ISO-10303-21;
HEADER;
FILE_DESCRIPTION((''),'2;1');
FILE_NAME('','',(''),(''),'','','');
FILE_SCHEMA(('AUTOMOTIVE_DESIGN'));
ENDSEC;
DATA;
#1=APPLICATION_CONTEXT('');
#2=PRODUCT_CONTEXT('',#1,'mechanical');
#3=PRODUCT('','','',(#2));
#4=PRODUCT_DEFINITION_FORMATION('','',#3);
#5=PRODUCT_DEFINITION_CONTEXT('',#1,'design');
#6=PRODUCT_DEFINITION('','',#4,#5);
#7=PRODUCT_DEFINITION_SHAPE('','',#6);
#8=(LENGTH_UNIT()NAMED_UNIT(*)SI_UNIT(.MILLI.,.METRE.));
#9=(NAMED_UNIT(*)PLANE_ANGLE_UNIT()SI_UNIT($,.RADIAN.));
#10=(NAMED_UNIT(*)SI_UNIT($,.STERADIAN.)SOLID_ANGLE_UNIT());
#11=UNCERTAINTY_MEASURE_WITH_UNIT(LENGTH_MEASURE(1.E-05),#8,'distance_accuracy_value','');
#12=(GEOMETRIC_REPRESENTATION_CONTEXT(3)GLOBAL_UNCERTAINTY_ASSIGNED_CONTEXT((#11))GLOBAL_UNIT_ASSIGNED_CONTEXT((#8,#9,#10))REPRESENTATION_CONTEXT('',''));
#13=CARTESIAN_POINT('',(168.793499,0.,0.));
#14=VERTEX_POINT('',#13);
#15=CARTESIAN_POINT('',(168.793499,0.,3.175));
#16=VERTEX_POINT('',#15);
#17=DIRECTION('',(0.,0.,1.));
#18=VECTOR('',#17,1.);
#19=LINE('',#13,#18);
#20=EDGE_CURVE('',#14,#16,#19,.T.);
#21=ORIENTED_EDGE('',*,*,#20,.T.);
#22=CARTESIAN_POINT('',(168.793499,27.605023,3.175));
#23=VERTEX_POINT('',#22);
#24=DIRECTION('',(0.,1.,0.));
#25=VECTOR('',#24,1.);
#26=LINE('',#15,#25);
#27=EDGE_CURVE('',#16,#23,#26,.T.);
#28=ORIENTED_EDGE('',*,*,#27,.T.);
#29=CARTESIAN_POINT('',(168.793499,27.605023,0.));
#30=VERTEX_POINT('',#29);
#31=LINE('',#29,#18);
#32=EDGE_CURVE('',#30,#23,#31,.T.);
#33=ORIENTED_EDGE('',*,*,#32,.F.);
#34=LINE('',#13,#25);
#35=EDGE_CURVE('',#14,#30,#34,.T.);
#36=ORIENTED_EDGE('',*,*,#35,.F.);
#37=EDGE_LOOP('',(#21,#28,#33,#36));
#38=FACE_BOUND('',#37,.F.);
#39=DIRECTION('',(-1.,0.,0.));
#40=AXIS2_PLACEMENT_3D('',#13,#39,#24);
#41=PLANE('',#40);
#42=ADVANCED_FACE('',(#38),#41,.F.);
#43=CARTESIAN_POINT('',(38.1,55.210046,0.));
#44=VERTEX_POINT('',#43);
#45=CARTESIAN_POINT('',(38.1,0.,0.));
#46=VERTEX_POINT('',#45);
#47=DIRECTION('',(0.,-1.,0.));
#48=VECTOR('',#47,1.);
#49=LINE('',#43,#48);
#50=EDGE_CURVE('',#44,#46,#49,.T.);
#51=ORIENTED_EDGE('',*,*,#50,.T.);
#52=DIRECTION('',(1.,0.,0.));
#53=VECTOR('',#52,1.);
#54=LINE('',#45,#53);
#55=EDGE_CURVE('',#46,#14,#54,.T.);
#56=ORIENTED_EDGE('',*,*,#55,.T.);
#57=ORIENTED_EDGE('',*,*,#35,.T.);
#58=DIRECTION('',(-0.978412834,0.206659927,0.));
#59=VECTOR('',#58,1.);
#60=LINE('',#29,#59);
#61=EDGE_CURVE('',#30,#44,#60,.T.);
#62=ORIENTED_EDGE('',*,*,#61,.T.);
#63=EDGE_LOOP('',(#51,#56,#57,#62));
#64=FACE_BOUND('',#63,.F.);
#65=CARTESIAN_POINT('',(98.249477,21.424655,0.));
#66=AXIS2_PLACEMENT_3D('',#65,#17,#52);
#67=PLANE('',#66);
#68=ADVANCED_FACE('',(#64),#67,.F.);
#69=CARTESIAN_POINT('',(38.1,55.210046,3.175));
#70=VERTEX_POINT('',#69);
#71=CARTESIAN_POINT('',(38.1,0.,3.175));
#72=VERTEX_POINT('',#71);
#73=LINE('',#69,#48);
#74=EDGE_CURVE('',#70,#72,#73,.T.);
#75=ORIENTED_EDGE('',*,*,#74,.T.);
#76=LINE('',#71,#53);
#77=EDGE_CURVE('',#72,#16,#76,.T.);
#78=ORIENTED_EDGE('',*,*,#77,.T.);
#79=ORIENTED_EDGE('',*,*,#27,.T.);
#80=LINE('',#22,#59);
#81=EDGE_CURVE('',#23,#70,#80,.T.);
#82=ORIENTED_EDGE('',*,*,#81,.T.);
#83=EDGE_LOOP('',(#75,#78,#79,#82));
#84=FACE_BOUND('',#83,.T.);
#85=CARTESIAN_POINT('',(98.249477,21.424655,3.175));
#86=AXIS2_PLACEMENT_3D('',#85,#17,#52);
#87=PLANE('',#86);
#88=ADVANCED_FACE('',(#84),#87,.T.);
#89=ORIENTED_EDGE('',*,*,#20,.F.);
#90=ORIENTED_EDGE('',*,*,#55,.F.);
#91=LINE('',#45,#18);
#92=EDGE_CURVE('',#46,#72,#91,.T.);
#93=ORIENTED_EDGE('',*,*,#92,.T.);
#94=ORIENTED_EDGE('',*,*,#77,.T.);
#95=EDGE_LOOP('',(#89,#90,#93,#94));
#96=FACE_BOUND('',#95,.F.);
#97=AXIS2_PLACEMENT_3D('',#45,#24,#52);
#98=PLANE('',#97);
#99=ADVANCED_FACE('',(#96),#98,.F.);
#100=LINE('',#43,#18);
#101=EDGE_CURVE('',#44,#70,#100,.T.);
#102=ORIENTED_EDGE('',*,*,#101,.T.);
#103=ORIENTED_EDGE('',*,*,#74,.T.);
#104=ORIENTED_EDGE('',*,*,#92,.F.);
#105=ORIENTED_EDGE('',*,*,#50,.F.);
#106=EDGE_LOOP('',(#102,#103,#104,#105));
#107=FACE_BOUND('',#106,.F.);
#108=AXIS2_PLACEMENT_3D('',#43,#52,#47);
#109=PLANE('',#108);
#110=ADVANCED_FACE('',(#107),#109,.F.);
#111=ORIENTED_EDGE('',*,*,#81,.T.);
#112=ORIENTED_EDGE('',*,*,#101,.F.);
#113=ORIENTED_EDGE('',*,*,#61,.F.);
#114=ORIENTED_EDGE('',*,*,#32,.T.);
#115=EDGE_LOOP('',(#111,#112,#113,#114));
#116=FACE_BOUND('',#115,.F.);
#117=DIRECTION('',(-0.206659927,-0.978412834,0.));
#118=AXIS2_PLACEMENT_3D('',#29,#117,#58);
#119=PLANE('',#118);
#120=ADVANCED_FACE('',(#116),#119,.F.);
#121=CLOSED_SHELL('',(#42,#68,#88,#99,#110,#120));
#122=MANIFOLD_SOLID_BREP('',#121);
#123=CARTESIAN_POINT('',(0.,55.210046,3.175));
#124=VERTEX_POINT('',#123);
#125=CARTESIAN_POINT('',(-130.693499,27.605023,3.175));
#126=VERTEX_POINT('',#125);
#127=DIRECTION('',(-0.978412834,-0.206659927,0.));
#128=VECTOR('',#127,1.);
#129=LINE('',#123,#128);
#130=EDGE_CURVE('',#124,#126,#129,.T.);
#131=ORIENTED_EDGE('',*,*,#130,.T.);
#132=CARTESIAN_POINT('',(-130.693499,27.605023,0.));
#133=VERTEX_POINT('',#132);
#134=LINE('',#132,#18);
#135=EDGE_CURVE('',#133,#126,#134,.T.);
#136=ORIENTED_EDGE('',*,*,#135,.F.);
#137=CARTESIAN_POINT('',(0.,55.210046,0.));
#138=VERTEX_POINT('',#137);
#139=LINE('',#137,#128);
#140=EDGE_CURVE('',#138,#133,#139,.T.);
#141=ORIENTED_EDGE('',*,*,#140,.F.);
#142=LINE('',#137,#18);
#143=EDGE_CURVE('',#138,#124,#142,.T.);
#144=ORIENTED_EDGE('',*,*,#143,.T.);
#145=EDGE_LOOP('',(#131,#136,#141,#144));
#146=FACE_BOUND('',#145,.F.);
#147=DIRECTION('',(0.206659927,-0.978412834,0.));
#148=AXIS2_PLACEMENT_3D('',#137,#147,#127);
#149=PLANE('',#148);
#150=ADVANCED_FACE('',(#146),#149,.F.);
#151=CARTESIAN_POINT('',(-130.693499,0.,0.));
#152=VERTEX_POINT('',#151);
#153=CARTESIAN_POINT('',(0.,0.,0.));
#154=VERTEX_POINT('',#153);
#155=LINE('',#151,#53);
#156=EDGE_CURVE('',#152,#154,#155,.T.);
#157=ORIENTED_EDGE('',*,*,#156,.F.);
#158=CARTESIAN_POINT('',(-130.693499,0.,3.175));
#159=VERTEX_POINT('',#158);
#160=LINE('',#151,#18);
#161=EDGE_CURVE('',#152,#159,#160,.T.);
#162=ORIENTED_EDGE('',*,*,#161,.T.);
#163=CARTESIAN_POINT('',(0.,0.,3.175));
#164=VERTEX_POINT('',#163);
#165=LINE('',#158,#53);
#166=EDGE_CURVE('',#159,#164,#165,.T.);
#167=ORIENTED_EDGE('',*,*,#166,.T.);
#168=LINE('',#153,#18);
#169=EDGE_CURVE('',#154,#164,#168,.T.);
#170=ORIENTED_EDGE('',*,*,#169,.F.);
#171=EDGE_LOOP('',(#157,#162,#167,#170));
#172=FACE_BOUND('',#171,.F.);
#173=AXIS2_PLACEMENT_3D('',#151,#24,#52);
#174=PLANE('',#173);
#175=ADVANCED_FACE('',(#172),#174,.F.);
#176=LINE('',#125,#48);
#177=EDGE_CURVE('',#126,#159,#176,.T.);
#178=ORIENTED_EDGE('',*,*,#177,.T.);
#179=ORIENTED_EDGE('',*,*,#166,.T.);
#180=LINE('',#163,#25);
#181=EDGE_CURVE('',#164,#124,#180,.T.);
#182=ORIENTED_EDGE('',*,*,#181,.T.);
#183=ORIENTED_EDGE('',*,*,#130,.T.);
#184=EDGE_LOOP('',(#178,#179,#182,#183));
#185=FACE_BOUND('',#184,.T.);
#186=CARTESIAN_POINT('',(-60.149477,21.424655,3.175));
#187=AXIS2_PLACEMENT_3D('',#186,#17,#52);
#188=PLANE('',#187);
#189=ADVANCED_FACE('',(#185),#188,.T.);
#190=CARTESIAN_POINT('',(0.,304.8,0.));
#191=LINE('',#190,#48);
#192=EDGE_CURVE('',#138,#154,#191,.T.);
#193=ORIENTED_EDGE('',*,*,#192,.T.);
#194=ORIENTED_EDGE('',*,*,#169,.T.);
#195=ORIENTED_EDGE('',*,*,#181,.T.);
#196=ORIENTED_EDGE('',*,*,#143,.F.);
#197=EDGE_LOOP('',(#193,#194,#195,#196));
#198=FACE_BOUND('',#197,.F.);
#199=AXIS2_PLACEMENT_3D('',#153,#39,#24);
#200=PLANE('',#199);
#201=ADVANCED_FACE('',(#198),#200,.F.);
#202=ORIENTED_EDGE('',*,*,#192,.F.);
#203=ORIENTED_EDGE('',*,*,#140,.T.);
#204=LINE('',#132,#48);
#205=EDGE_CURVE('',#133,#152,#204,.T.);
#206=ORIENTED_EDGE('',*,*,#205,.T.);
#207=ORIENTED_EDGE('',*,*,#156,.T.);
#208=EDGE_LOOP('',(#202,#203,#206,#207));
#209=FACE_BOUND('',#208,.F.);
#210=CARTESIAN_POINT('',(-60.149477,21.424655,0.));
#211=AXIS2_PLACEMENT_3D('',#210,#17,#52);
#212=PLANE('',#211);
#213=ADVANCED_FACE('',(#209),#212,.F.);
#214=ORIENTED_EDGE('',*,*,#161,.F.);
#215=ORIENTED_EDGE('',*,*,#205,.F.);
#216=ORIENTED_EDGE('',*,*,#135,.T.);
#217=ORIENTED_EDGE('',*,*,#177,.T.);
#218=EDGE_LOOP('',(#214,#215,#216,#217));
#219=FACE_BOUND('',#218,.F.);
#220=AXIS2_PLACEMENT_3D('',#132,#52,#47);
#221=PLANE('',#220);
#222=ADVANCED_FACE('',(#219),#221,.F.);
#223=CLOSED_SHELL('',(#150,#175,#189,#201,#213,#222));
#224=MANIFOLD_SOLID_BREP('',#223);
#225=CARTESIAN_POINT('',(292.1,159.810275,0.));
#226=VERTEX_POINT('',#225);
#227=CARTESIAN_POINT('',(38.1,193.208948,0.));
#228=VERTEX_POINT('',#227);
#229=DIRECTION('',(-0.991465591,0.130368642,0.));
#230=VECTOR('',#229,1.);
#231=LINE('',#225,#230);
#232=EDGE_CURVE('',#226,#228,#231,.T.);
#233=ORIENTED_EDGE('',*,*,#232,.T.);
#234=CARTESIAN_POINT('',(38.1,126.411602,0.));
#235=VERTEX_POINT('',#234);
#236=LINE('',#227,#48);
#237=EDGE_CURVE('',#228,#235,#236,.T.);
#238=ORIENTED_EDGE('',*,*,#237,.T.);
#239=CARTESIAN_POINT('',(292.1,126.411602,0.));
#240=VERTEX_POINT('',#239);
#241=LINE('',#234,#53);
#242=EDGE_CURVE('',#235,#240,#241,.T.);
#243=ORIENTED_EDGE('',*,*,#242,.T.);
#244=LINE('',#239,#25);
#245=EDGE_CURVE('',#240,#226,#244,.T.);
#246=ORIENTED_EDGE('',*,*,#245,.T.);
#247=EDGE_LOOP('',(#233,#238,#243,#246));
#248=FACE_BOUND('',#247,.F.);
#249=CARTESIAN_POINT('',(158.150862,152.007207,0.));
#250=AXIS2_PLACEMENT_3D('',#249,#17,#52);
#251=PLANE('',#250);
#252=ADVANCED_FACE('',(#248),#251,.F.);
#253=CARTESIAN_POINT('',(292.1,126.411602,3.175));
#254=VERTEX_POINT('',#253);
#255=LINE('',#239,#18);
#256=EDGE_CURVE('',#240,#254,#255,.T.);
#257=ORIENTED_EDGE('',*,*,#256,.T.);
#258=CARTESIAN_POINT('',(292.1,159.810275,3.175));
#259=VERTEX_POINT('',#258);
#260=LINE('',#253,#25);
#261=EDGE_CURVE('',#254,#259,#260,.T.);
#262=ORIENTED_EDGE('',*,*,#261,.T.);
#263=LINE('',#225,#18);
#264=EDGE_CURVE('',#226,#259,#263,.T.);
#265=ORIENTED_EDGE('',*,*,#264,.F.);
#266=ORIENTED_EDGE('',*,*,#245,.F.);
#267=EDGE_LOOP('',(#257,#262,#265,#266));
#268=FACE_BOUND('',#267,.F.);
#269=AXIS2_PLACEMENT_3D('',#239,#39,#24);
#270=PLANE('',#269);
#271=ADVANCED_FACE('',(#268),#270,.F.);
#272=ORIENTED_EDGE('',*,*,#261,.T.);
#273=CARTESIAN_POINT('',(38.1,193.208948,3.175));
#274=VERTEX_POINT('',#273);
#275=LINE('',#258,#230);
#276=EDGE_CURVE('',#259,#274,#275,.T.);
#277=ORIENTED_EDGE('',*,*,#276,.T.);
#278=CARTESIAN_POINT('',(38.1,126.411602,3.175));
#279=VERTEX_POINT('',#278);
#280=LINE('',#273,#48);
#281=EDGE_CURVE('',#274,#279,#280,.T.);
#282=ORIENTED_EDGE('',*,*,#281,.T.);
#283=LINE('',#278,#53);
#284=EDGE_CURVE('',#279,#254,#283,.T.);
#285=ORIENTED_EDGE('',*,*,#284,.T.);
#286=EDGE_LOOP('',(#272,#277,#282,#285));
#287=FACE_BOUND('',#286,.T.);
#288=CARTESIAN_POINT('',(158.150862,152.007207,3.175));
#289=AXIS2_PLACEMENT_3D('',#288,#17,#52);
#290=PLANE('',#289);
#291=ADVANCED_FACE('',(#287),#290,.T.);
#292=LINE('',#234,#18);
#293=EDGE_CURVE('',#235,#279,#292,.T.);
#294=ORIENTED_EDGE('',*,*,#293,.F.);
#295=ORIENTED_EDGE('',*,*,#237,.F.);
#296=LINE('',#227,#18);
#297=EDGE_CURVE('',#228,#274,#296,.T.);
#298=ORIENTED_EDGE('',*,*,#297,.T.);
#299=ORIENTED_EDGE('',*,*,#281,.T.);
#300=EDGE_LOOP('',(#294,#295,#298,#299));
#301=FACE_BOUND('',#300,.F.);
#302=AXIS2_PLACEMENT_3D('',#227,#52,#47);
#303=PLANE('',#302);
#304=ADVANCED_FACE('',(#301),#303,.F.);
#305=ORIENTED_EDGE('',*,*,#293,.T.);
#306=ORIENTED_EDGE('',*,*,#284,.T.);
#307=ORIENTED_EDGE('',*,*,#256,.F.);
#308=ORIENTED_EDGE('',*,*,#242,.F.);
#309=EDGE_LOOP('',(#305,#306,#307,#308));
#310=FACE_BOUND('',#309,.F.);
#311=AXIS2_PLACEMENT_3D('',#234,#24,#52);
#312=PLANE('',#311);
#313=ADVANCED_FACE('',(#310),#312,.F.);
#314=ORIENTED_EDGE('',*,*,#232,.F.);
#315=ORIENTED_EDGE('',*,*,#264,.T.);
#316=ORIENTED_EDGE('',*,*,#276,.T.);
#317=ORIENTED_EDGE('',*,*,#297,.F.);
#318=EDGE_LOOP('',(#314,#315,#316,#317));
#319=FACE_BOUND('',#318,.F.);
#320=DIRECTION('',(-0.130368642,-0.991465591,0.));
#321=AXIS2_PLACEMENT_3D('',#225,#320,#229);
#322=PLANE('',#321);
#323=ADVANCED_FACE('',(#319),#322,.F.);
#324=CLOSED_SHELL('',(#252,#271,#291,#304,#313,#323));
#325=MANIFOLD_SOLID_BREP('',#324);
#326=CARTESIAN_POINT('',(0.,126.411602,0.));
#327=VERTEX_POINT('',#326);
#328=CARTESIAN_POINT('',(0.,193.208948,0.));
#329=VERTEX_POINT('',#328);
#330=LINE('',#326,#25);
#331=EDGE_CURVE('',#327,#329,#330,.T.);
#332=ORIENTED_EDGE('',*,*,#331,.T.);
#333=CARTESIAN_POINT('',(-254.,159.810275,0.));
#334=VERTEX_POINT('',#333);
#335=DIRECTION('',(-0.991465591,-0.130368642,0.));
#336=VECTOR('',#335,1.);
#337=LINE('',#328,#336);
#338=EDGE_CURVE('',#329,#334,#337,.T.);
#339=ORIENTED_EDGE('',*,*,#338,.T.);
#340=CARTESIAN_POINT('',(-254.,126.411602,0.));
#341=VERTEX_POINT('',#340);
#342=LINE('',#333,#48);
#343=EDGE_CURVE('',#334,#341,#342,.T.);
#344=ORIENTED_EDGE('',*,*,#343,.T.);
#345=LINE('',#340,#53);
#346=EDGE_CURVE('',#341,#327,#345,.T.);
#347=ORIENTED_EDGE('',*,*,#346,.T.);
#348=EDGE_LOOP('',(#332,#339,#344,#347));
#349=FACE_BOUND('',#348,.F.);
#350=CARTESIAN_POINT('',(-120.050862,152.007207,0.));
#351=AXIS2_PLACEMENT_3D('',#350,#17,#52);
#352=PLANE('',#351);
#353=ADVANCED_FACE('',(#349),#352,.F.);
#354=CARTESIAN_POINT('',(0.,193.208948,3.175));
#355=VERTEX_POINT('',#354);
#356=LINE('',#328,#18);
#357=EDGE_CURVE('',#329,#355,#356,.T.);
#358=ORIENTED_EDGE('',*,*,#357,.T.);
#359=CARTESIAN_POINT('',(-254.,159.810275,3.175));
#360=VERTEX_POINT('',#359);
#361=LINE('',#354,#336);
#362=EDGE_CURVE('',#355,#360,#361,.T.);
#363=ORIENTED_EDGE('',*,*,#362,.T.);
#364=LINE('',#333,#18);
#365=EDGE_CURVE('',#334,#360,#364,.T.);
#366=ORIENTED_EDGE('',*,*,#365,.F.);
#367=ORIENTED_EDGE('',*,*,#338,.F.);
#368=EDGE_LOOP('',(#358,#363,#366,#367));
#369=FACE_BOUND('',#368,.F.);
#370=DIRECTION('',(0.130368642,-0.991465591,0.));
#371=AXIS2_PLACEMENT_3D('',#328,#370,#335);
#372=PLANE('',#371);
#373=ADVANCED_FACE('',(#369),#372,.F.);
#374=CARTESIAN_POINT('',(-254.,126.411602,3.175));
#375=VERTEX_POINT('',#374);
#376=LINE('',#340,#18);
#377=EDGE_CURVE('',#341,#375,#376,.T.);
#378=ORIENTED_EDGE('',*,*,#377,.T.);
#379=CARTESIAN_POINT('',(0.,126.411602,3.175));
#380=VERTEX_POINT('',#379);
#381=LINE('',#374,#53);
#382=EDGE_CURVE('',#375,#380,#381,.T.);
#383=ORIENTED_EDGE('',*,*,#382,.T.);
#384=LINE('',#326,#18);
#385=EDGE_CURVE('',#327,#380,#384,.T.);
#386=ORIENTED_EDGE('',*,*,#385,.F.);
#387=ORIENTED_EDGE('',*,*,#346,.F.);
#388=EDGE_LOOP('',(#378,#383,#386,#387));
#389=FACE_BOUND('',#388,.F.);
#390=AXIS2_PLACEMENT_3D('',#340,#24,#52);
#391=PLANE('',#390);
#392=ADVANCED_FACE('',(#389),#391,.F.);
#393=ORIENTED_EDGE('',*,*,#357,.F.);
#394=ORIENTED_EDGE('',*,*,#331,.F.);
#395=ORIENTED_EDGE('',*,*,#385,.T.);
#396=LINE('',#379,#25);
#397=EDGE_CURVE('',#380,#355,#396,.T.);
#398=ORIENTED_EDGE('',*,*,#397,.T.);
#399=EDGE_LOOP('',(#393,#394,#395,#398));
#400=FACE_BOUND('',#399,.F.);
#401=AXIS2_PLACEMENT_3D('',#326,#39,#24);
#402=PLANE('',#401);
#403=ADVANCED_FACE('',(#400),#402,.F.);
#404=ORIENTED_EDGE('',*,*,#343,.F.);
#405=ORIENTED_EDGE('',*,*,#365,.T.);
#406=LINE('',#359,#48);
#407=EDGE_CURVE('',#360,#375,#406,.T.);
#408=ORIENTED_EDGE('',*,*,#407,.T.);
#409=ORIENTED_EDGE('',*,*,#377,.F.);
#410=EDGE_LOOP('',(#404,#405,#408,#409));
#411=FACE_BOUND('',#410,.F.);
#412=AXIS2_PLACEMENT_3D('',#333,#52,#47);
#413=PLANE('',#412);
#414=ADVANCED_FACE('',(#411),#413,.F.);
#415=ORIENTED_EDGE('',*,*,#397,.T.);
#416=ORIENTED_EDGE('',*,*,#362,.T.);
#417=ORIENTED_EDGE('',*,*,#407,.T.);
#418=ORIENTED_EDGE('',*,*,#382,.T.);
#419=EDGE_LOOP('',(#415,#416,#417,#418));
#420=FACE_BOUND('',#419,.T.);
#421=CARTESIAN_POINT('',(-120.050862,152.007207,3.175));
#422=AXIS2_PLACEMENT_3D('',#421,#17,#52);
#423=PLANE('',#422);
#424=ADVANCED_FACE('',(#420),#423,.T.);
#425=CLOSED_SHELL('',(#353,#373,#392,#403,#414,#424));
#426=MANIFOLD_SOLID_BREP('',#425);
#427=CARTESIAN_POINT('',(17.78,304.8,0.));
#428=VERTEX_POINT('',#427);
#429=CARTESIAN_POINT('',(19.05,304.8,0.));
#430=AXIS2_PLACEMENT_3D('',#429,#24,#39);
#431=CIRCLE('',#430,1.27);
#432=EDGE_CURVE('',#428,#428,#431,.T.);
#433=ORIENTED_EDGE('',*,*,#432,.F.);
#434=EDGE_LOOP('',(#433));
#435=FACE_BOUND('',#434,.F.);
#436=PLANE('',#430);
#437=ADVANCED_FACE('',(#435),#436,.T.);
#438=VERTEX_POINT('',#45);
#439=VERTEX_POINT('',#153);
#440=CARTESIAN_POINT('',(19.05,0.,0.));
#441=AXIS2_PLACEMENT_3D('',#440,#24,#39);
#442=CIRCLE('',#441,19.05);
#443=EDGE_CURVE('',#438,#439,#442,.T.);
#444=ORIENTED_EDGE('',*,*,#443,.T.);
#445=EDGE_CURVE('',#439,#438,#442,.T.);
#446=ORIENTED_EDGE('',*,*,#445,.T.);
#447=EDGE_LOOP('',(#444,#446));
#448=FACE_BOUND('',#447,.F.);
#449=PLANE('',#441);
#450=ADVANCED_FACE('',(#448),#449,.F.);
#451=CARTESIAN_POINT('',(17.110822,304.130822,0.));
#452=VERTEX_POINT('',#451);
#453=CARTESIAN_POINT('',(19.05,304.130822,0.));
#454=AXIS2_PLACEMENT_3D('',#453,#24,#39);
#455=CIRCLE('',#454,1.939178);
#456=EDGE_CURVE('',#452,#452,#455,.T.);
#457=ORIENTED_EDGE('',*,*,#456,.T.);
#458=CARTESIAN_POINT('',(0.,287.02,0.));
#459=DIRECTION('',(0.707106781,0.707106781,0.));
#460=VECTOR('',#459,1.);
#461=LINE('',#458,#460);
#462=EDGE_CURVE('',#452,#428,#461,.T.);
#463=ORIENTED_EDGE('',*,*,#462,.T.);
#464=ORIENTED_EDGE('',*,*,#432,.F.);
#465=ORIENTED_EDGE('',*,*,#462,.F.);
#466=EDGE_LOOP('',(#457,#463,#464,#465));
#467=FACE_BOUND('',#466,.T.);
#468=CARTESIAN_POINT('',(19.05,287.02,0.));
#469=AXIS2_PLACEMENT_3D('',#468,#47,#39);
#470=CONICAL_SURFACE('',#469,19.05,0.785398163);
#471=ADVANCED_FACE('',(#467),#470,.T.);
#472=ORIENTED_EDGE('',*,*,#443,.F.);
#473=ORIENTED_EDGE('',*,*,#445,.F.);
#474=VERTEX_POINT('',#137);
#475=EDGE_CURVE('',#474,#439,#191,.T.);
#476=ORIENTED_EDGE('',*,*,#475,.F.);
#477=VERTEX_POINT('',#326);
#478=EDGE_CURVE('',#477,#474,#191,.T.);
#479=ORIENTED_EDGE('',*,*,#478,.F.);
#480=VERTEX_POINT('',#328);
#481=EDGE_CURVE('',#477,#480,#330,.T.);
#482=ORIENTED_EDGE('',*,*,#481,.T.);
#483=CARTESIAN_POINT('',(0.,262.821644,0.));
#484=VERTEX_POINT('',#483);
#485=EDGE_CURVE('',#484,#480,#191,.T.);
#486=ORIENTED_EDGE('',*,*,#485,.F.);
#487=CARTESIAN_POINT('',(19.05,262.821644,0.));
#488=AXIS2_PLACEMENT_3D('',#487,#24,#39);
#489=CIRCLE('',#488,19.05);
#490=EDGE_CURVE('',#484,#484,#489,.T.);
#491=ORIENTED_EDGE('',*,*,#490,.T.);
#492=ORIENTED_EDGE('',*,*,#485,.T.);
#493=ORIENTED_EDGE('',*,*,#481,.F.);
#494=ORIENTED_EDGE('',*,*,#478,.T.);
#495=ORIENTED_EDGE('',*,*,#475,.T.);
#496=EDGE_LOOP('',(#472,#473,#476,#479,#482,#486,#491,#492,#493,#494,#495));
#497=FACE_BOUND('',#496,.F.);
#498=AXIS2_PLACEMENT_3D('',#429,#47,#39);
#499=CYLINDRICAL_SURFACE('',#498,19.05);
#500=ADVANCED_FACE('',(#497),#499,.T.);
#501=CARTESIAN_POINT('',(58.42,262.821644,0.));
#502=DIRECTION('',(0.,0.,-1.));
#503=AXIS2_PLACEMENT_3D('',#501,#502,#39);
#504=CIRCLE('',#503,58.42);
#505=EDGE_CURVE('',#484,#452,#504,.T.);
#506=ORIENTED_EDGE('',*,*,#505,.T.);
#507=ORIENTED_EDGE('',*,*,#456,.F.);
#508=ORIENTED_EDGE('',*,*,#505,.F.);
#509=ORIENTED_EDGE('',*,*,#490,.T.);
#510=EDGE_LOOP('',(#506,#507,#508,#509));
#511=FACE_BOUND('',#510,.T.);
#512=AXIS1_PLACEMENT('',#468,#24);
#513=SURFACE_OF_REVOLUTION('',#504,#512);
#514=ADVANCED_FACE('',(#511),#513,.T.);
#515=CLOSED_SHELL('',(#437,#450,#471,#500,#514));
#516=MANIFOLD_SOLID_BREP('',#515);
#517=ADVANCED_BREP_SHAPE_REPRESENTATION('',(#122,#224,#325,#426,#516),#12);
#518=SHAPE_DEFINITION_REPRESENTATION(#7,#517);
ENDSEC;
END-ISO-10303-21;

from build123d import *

# Parameters (mm, degrees)
F2_DEPTH = 3.175


# Not quite as in the source:
# - a fillet or chamfer that OpenCascade refuses, or shapes differently, is made with other operations: its cross-section is extruded or revolved along the edge and cut away or added


with BuildPart() as f1:
    # F0 (on Top) → F1 (revolve)
    with BuildSketch(Plane.XY):
        Polygon((0, 55.2100464702), (0, 0), (19.05, 0), (19.05, 304.8), (0, 304.8), (0, 193.2089477777), (0, 126.4116019011), align=None)
    revolve(axis=Axis((19.05, 152.4, 0), (0, 1, 0)))

    # F0 (on Top) → F2 (join)
    with BuildSketch(Plane.XY):
        Polygon((-254, 126.4116019011), (0, 126.4116019011), (0, 193.2089477777), (-254, 159.8102748394), align=None)
        Polygon((38.1, 193.2089477777), (38.1, 126.4116019011), (292.1, 126.4116019011), (292.1, 159.8102748394), align=None)
        Polygon((-130.6934994698, 0), (0, 0), (0, 55.2100464702), (-130.6934994698, 27.6050232351), align=None)
        Polygon((38.1, 55.2100464702), (38.1, 0), (168.7934994698, 0), (168.7934994698, 27.6050232351), align=None)
    extrude(amount=F2_DEPTH)

    # F3: chamfer of 17.78 on 1 edges, made by hand

    # F3_s1 → F3_t2 (revolve, cut)
    with BuildSketch(Plane.XY):
        Polygon((0, 287.02), (17.78, 304.8), (0, 304.8), align=None)
    revolve(axis=Axis((19.05, 304.8, 0), (0, 1, 0)), mode=Mode.SUBTRACT)

    # F4: fillet of radius 58.42 on 1 edges, made by hand

    # F4_s1 → F4_t2 (revolve, cut)
    with BuildSketch(Plane.XY):
        with BuildLine():
            ThreePointArc((0, 262.8216436862), (4.4469577107, 285.1780098049), (17.1108218431, 304.1308218431))
            Line((17.1108218431, 304.1308218431), (0, 287.02))
            Line((0, 287.02), (0, 262.8216436862))
        make_face()
    revolve(axis=Axis((19.05, 287.02, 0), (0, 1, 0)), mode=Mode.SUBTRACT)


solid = f1.part
